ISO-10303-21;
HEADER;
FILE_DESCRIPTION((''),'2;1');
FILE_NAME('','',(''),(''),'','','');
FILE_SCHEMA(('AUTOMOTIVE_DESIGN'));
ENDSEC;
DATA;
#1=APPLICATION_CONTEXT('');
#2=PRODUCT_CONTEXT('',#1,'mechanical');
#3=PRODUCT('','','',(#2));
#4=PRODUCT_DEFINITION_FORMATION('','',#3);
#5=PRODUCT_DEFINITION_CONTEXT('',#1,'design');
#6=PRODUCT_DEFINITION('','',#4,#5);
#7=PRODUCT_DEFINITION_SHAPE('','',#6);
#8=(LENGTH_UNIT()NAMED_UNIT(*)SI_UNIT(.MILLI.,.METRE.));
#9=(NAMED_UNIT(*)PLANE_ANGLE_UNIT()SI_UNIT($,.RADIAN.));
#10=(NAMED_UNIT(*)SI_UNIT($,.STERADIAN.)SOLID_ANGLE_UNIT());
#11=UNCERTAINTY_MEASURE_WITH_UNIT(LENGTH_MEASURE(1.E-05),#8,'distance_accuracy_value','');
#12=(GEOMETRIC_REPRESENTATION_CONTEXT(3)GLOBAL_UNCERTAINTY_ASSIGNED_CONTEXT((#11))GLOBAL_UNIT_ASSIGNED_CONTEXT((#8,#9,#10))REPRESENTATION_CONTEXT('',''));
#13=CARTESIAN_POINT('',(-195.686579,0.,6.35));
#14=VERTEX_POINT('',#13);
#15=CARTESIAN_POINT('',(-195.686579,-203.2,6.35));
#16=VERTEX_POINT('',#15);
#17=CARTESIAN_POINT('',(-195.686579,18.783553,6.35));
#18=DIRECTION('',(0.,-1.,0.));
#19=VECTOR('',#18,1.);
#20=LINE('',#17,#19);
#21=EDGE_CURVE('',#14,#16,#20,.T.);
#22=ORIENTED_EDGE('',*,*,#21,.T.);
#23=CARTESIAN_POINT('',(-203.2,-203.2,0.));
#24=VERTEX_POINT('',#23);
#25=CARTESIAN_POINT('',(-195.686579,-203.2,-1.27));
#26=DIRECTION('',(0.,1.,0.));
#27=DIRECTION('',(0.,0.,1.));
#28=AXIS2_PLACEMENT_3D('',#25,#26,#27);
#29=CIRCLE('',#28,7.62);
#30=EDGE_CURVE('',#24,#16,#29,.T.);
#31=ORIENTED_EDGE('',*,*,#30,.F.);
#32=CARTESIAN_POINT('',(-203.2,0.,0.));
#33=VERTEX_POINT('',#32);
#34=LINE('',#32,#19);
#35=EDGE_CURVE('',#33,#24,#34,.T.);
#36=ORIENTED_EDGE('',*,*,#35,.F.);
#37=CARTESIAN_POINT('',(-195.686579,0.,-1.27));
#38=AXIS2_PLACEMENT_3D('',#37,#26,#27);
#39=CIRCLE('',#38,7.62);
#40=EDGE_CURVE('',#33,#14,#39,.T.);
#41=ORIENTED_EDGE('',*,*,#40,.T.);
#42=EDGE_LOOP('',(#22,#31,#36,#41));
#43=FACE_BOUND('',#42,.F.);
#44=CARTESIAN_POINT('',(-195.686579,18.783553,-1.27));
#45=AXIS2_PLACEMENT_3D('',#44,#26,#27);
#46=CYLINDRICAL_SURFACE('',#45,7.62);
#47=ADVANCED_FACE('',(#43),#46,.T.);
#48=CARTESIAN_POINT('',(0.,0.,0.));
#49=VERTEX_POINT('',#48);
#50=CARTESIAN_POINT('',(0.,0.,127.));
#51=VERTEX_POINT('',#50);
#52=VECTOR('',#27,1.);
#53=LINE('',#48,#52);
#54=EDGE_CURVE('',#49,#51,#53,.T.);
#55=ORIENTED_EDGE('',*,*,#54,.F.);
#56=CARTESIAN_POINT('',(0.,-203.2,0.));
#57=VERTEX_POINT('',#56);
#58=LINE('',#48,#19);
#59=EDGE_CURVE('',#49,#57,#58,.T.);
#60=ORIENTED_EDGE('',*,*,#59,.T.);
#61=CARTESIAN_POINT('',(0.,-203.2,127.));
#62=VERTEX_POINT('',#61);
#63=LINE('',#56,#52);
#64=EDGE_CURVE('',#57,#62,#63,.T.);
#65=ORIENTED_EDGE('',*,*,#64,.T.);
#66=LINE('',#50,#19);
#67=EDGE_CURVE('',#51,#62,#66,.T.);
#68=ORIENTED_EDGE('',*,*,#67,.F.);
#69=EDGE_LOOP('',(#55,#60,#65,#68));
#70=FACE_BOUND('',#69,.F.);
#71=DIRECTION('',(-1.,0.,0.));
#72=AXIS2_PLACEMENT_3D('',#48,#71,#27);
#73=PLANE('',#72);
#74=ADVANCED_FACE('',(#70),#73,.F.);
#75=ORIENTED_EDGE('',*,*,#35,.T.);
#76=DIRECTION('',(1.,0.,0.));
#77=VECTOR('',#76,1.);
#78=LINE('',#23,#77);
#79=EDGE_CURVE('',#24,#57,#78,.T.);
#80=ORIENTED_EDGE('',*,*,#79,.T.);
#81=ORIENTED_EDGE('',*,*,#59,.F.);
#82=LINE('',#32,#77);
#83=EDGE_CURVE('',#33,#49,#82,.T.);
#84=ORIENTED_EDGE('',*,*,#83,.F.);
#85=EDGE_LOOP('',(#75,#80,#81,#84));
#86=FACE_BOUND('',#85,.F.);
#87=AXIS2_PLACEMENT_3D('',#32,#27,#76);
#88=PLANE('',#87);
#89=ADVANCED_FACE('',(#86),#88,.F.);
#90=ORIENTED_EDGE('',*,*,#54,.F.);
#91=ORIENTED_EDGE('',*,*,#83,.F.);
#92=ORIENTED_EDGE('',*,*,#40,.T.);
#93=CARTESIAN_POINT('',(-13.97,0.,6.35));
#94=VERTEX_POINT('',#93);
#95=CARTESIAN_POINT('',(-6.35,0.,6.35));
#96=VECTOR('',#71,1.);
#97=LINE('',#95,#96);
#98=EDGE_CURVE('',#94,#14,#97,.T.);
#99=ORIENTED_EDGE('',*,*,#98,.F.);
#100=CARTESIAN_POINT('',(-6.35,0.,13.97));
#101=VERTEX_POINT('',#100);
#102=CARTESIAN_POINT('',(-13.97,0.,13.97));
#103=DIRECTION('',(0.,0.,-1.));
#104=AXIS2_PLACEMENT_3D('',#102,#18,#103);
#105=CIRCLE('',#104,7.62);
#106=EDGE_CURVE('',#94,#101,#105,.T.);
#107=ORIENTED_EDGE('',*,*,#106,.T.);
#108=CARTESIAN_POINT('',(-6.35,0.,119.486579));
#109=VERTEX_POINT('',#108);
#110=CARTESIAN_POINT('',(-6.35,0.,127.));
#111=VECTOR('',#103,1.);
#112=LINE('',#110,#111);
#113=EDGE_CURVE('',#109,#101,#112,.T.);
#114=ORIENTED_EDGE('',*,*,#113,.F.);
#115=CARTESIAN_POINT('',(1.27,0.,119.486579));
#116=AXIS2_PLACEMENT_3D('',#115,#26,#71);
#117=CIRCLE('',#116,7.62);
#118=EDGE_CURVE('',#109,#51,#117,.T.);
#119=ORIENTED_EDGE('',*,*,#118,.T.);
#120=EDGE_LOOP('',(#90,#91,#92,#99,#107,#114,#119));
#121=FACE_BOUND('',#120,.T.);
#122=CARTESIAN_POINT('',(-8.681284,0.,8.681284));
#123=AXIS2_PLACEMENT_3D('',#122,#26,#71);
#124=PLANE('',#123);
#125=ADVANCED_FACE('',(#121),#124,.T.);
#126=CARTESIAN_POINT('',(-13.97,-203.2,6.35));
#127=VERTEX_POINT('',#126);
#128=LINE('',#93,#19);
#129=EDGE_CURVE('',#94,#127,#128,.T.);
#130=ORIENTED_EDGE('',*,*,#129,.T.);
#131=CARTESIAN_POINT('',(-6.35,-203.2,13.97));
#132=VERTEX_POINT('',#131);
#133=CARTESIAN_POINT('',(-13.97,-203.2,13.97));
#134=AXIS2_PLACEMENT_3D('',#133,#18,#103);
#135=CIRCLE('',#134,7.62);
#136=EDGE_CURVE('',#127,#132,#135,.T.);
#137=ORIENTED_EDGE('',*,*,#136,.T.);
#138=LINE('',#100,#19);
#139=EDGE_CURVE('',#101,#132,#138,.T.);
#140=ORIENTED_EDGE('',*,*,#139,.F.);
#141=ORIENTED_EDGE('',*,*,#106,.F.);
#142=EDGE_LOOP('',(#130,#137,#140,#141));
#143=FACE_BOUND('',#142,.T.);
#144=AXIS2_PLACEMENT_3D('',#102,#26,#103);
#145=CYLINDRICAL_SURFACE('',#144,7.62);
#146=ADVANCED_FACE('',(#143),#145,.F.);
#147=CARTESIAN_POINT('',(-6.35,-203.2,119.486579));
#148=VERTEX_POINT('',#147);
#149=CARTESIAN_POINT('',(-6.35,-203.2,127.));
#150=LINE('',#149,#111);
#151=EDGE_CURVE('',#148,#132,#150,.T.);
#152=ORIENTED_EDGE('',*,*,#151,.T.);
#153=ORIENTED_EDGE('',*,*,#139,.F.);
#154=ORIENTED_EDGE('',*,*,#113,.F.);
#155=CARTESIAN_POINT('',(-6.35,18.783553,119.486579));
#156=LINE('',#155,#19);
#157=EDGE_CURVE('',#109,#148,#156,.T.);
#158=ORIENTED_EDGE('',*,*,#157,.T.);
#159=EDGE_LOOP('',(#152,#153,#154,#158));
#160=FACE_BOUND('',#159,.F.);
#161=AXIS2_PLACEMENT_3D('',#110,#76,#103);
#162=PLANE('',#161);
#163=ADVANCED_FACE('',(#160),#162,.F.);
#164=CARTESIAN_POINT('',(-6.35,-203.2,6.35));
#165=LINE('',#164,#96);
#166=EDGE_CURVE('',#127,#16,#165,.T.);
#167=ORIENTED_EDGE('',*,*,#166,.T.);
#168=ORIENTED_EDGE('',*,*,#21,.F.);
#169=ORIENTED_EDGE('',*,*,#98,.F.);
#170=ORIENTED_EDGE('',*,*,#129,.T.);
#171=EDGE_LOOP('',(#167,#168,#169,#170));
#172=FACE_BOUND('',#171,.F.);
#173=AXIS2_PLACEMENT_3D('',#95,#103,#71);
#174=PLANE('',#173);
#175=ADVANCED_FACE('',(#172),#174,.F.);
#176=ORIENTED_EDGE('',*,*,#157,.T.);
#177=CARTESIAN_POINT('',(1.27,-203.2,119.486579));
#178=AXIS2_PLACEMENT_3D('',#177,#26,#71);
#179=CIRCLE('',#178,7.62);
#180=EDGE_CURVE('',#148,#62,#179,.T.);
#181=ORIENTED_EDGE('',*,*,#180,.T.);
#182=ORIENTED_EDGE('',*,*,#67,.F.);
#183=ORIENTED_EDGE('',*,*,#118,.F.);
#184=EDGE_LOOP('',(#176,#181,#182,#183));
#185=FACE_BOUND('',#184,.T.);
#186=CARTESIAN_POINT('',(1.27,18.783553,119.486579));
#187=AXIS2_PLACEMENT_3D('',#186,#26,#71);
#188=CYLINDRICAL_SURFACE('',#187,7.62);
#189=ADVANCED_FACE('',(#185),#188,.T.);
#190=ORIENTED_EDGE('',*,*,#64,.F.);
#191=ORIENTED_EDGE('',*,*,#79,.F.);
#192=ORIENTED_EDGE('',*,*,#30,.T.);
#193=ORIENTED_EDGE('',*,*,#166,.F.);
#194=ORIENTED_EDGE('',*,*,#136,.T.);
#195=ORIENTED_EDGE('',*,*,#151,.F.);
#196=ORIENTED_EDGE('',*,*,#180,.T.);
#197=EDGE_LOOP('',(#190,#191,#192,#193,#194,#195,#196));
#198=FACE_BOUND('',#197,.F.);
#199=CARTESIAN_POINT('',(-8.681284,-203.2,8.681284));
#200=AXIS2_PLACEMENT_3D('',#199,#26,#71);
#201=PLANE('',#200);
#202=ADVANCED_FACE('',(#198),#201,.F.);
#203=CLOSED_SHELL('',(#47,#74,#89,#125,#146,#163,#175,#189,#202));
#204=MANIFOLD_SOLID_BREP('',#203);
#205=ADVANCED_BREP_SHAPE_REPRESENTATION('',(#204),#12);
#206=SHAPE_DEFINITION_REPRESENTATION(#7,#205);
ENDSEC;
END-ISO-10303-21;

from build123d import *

# Parameters (mm, degrees)
F1_DEPTH    = 203.2
F2_T1_DEPTH = 203.2
F2_T3_DEPTH = 240.7671066227
F2_T5_DEPTH = 240.7671066227


# Not quite as in the source:
# - a fillet or chamfer that OpenCascade refuses, or shapes differently, is made with other operations: its cross-section is extruded or revolved along the edge and cut away or added


with BuildPart() as f1:
    # F0 (on Front) → F1 (new body)
    with BuildSketch(Plane.XZ):
        Polygon((-203.2, 0), (0, 0), (0, 127), (-6.35, 127), (-6.35, 6.35), (-203.2, 6.35), align=None)
    extrude(amount=F1_DEPTH)

    # F2: fillet of radius 7.62 on 3 edges, made by hand

    # F2_s2 → F2_t1 (join)
    with BuildSketch(Plane.XZ):
        with BuildLine():
            ThreePointArc((-13.97, 6.35), (-8.5818463274, 8.5818463274), (-6.35, 13.97))
            Line((-6.35, 13.97), (-6.35, 6.35))
            Line((-6.35, 6.35), (-13.97, 6.35))
        make_face()
    extrude(amount=F2_T1_DEPTH)

    # F2_s4 → F2_t3 (cut)
    with BuildSketch(Plane.XZ.offset(-18.7835533113)):
        with BuildLine():
            ThreePointArc((-195.6865786755, 6.35), (-200.6052675251, 4.5498711326), (-203.2, 0))
            Line((-203.2, 0), (-203.2, 6.35))
            Line((-203.2, 6.35), (-195.6865786755, 6.35))
        make_face()
    extrude(amount=F2_T3_DEPTH, mode=Mode.SUBTRACT)

    # F2_s6 → F2_t5 (cut)
    with BuildSketch(Plane.XZ.offset(-18.7835533113)):
        with BuildLine():
            ThreePointArc((-6.35, 119.4865786755), (-4.5498711326, 124.4052675251), (0, 127))
            Line((0, 127), (-6.35, 127))
            Line((-6.35, 127), (-6.35, 119.4865786755))
        make_face()
    extrude(amount=F2_T5_DEPTH, mode=Mode.SUBTRACT)


solid = f1.part
